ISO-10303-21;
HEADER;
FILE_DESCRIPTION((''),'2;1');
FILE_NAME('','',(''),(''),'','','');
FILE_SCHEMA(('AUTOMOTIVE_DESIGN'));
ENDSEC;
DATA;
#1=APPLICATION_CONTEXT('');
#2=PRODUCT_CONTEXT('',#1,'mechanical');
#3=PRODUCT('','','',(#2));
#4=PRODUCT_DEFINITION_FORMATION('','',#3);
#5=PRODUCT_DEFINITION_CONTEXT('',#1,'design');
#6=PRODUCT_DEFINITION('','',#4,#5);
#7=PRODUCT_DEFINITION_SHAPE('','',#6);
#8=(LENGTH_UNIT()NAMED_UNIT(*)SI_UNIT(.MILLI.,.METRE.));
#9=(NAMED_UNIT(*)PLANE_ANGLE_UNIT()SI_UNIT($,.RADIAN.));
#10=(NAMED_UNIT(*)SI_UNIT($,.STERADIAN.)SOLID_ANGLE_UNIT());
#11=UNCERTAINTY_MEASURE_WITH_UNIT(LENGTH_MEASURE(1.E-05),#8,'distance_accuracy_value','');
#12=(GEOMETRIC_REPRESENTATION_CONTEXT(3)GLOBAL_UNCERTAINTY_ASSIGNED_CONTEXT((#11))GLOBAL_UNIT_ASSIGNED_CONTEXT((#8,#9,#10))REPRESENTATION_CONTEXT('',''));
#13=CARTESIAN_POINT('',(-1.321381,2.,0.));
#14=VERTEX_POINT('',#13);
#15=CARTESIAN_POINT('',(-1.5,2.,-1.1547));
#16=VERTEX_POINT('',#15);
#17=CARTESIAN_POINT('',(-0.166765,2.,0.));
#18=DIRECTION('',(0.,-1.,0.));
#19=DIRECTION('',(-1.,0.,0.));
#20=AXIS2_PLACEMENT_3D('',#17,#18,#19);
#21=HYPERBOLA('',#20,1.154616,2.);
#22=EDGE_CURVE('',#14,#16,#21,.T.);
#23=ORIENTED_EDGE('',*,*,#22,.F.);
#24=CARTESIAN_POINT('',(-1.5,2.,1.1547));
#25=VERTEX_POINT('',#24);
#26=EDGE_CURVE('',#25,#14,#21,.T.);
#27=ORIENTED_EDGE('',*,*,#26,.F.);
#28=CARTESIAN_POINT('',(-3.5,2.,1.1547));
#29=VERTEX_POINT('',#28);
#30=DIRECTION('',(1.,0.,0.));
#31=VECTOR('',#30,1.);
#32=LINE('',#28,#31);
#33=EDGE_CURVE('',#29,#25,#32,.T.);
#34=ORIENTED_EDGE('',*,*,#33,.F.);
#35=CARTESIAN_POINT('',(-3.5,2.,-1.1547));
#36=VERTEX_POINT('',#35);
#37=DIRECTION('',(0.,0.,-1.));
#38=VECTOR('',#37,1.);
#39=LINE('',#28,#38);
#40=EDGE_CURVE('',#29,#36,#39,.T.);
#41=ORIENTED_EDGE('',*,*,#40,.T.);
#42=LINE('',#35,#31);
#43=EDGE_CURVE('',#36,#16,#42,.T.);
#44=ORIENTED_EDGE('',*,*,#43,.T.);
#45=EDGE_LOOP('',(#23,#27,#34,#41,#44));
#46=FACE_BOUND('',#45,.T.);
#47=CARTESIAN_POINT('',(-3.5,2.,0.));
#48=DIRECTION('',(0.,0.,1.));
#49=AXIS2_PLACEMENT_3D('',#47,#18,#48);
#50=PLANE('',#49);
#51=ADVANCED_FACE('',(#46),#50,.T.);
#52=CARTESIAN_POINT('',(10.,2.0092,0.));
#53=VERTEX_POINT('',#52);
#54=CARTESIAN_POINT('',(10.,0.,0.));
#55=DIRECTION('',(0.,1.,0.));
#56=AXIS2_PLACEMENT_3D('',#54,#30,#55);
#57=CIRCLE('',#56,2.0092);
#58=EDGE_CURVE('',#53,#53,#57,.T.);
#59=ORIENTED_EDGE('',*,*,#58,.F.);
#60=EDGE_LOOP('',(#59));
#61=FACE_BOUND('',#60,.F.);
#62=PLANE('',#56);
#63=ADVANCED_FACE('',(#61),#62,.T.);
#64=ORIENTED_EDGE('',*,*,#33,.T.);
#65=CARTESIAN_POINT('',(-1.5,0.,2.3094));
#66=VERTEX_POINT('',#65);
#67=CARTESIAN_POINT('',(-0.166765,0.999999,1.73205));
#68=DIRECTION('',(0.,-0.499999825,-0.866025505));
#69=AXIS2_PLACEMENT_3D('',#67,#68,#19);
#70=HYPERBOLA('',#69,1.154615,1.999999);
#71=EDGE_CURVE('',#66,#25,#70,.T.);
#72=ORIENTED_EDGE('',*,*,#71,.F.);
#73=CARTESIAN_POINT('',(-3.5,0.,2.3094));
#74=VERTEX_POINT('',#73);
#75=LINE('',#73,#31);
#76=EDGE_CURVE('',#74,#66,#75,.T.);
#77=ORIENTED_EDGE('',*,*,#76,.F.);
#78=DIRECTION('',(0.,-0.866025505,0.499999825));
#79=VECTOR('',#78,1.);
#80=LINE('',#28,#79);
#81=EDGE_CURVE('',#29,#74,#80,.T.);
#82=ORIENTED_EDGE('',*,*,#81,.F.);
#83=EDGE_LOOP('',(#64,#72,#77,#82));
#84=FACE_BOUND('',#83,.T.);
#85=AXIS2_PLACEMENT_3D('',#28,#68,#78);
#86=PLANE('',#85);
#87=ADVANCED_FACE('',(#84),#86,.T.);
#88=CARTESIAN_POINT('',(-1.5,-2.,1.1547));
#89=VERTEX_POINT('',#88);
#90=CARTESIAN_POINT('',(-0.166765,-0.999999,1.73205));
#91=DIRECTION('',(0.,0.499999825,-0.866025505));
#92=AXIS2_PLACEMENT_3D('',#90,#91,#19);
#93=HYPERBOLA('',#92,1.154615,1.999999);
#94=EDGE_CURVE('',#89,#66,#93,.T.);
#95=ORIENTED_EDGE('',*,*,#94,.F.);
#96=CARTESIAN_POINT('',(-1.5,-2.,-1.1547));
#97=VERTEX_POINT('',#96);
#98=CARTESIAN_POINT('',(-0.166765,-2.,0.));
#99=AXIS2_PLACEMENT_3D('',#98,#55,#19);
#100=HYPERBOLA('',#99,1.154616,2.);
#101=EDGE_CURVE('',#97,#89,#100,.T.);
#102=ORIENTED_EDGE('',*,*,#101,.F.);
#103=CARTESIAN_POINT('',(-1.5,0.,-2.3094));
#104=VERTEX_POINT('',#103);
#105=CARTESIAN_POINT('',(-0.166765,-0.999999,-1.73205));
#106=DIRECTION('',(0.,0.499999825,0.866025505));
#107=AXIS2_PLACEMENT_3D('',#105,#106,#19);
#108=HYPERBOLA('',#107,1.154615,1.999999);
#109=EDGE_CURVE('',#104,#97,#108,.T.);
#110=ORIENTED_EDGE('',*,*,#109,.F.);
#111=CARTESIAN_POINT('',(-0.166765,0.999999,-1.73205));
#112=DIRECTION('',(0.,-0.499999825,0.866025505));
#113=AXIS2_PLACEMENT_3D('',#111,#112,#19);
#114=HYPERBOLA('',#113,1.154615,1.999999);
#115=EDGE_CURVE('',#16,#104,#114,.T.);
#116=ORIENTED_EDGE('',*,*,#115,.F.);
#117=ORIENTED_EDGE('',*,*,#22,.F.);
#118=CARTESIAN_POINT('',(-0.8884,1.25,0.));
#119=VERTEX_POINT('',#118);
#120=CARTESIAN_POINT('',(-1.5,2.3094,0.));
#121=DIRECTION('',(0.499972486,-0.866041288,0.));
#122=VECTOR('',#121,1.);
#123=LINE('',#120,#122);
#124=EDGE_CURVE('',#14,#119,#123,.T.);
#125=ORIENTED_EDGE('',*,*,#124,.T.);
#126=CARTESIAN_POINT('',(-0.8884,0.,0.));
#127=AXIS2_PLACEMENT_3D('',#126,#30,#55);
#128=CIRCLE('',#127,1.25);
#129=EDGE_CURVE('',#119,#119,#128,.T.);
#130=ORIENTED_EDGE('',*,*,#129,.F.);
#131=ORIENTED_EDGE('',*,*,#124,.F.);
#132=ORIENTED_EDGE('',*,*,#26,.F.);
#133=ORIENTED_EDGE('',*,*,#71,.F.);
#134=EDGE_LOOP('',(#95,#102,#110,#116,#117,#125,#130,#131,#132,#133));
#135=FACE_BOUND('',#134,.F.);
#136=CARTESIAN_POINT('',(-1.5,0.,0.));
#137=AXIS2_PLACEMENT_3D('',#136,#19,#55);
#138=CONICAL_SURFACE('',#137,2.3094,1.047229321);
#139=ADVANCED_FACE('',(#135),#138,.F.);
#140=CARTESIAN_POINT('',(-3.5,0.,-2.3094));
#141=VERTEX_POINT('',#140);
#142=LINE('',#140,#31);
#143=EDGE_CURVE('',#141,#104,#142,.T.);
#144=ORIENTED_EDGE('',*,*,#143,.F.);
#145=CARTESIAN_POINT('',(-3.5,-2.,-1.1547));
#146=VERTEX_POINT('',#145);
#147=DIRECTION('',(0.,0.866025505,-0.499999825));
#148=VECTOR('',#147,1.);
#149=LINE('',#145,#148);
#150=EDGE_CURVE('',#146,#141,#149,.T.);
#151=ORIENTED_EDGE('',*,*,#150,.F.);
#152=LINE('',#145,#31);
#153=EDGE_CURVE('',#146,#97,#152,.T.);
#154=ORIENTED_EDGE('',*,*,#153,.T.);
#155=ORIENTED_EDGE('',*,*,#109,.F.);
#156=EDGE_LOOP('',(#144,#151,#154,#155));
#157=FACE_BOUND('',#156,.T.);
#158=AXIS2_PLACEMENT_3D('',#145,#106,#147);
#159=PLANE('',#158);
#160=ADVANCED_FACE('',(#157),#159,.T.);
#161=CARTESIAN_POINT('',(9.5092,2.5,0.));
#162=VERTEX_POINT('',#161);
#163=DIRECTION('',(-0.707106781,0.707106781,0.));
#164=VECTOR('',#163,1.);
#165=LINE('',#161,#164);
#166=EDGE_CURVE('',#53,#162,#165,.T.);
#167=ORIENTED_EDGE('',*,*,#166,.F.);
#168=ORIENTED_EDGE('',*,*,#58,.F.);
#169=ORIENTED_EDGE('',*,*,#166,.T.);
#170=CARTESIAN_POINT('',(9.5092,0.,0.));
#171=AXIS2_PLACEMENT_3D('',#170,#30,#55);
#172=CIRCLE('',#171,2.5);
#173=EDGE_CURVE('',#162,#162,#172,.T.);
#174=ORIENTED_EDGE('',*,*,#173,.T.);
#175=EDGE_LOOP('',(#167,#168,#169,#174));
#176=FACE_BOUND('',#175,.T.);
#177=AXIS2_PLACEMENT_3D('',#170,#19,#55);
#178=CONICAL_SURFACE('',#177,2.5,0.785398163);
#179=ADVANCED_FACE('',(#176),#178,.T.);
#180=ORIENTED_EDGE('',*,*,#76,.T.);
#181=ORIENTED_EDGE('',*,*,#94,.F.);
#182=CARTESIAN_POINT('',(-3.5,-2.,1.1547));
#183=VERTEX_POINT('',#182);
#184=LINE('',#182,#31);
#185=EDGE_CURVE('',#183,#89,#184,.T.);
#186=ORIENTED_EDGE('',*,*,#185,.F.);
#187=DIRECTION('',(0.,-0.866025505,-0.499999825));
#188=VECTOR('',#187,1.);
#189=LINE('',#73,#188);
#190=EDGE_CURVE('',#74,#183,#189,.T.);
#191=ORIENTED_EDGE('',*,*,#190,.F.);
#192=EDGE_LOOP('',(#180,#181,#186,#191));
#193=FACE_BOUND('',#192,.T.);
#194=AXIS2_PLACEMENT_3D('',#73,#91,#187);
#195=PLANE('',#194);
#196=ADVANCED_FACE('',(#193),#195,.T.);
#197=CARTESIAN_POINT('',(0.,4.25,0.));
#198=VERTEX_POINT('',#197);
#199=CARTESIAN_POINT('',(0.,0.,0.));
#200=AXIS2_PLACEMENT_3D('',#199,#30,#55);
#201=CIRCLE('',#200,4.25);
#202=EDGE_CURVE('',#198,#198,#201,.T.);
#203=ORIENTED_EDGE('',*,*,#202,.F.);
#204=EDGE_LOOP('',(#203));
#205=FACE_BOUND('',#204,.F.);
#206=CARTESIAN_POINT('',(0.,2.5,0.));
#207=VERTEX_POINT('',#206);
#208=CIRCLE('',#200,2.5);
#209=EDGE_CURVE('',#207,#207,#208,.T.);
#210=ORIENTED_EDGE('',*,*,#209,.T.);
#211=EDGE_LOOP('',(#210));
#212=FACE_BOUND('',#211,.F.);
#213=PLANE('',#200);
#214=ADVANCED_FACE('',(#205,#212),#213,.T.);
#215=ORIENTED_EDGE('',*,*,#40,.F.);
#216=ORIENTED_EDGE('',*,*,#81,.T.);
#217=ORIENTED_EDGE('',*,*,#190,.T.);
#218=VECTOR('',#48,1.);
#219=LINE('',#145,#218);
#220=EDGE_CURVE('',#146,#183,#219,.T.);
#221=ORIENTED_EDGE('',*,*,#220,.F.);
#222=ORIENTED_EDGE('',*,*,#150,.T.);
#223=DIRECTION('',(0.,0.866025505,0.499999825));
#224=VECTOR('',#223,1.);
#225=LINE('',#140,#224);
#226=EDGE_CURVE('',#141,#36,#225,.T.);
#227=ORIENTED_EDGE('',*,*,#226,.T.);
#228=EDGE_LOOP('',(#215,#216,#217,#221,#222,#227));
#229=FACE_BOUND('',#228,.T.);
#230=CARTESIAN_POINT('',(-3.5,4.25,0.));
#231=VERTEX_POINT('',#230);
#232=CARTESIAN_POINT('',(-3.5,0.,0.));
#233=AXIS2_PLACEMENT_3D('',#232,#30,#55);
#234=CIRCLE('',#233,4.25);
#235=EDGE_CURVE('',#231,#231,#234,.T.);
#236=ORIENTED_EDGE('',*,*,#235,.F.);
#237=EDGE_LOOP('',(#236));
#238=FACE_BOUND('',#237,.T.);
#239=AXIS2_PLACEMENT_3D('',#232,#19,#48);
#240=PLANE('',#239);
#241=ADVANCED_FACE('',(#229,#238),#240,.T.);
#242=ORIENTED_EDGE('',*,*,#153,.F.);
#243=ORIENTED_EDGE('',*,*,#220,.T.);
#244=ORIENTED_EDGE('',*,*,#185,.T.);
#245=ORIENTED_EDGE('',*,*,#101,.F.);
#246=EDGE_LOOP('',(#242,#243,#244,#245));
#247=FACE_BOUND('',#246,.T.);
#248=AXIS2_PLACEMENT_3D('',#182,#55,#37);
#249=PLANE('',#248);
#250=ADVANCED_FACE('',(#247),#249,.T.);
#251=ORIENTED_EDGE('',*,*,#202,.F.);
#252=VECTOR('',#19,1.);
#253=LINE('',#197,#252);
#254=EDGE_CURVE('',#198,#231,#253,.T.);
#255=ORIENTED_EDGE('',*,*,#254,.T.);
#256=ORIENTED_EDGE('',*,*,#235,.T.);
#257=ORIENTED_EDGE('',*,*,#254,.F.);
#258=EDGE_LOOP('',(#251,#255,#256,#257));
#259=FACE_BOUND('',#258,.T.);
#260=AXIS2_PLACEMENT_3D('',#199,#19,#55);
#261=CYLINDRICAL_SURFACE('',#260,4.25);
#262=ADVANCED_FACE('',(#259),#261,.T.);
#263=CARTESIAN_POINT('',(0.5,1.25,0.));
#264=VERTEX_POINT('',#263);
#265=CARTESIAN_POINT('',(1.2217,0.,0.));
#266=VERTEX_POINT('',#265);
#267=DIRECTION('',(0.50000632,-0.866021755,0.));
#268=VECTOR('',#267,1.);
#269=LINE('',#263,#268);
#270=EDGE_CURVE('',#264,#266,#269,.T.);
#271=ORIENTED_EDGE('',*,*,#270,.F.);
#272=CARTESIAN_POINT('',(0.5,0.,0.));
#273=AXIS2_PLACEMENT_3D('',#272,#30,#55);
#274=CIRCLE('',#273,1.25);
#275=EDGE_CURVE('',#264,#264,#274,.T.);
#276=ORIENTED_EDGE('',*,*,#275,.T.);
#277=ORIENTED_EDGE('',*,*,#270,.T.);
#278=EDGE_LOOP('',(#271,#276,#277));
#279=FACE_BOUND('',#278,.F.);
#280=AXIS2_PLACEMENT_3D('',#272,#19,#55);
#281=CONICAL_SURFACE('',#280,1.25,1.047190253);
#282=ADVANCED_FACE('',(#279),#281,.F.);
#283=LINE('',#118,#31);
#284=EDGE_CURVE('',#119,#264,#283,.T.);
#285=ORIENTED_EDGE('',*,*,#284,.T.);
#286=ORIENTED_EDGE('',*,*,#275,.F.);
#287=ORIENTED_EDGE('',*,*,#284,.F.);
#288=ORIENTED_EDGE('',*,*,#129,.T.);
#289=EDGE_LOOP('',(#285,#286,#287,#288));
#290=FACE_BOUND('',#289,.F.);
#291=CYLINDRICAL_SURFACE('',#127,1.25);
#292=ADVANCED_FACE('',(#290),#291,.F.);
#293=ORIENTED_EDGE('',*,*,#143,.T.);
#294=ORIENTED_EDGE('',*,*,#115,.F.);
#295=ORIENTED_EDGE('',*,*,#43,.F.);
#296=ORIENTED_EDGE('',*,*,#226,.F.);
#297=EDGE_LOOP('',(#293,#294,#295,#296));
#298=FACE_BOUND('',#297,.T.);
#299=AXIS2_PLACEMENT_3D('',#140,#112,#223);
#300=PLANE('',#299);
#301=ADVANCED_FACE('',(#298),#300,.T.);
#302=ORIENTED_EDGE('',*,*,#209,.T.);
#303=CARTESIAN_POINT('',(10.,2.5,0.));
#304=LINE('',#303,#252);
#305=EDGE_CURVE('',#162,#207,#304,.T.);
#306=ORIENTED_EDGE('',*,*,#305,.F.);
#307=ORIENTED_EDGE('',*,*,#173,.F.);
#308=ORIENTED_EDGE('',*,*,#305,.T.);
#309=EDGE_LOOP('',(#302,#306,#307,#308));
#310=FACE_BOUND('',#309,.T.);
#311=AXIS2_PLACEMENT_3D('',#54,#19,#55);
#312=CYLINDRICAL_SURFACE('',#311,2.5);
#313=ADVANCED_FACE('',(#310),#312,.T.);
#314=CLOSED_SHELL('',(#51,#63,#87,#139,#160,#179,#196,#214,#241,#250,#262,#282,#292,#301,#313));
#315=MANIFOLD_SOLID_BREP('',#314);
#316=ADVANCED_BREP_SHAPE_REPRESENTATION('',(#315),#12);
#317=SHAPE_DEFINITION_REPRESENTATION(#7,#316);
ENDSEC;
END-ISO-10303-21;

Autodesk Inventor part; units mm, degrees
ref_plane "YZ Plane" through (0, 0, 0) normal (1, 0, 0) x (0, 1, 0)
ref_plane "XZ Plane" through (0, 0, 0) normal (0, 1, 0) x (-1, 0, 0)
sketch "草圖1" plane through (0, 0, 0) normal (0, 0, 1) x (1, 0, 0)
  line L0 (1.2217, 0) -> (10, 0)
  line L1 (10, 0) -> (10, 2.5)
  line L2 (10, 2.5) -> (0, 2.5)
  line L3 (0, 2.5) -> (0, 4.25)
  line L4 (0, 4.25) -> (-3.5, 4.25)
  line L5 (-3.5, 4.25) -> (-3.5, 2.3094)
  line L6 (-3.5, 2.3094) -> (-1.5, 2.3094)
  line L7 (-1.5, 2.3094) -> (-0.8884, 1.25)
  line L8 (-6.2, 0) -> (12.7, 0) projected
  line L9 (0, -0.85) -> (0, 5.1) projected
  line L10 (-0.8884, 1.25) -> (0.5, 1.25)
  line L11 (0.5, 1.25) -> (1.2217, 0)
  line L12 (-3.5, 2.3094) -> (-3.5, 0) construction
  dimension "d0" = 3.5
  dimension "d1" = 2
  dimension "d2" = 60
  dimension "d3" = 5
  dimension "d4" = 4.6188
  dimension "d5" = 8.5
  dimension "d15" = 4
  dimension "d16" = 2.5
  dimension "d17" = 10
revolve "本體" add sketch "草圖1" angle 360 about axis through (1.2217, 0, 0) along (1, 0, 0) contours L11 L10 L9 L2 L1 L0 | L10 L7 L6 L5 L4 L3 L9
sketch "草圖2" plane through (-3.5, 0, 0) normal (-1, 0, 0) x (0, 0, 1)
  circle A0 centre (0, 0) radius 2.3094 projected
  line L0 (0, -5.95) -> (0, 5.95) projected
  line L1 (-5.95, 0) -> (5.95, 0) projected
  line L2 (2.3094, 0) -> (1.1547, -2)
  line L3 (1.1547, -2) -> (-1.1547, -2)
  line L4 (-1.1547, -2) -> (-2.3094, 0)
  line L5 (-2.3094, 0) -> (-1.1547, 2)
  line L6 (-1.1547, 2) -> (1.1547, 2)
  line L7 (1.1547, 2) -> (2.3094, 0)
extrude "塞槽" add sketch "草圖2" against normal up to next contours L7 A0 | A0 L2 | L6 L0 A0 | A0 L0 L3 | L0 L6 A0 | A0 L3 L0 | L4 A0 | A0 L5
thread "螺紋" size "M5x0.8" class "6g" standard "ISO Metric profile" length 7.4
chamfer "倒角1" distance 0.4908 distance2 0.4908 1 edges at (10, -2.5, 0) measured on face at (10, -0.7741, -0.6858)
ref_plane "Work Plane1" through (5, 0, 0) normal (0, 0.5, 0.8660254) x (1, 0, 0)
equation "\"d7\" = GEL"
equation "\"d9\" = -0.5 * SPD + 0.5 * GD"
equation "\"d12\" = GUL"
equation "\"d0\" = KOH"
equation "\"d1\" = INTI"
equation "\"d3\" = GD"
equation "\"d4\" = 1.1547 * SW"
equation "\"d5\" = KOD"
equation "\"d15\" = INFT"
equation "\"d16\" = SDT"
equation "\"d17\" = NLG"
equation "\"GD\" = NND"
equation "\"NLG\" = 10"
equation "\"GEL\" = 7.4"
equation "\"KOD\" = 8.5"
equation "\"KOH\" = 3.5"
equation "\"GUL\" = 0.61345 * PTC"
equation "\"SW\" = 4"
equation "\"INTI\" = 2"
equation "\"SPD\" = NND - 1.2269 * PTC"
equation "\"SDT\" = 2.5"
equation "\"INFT\" = 4"
equation "\"TOA\" = 30deg"
equation "\"GD1\" = THREADDIA - 1.2269 * PTC"
equation "\"THREADDIA\" = 5"
equation "\"BDM\" = NND"
equation "\"RR\" = 0.5"
equation "\"PTC\" = 0.8"
equation "\"NND\" = 5"
equation "\"SLG\" = 2.6"
equation "\"GAL\" = 0.61345 * PTC"
equation "\"E0\" = 1.155 * SW"
properties part number "CNS 4557 - M5 x 10" material "鋼、軟鋼"
